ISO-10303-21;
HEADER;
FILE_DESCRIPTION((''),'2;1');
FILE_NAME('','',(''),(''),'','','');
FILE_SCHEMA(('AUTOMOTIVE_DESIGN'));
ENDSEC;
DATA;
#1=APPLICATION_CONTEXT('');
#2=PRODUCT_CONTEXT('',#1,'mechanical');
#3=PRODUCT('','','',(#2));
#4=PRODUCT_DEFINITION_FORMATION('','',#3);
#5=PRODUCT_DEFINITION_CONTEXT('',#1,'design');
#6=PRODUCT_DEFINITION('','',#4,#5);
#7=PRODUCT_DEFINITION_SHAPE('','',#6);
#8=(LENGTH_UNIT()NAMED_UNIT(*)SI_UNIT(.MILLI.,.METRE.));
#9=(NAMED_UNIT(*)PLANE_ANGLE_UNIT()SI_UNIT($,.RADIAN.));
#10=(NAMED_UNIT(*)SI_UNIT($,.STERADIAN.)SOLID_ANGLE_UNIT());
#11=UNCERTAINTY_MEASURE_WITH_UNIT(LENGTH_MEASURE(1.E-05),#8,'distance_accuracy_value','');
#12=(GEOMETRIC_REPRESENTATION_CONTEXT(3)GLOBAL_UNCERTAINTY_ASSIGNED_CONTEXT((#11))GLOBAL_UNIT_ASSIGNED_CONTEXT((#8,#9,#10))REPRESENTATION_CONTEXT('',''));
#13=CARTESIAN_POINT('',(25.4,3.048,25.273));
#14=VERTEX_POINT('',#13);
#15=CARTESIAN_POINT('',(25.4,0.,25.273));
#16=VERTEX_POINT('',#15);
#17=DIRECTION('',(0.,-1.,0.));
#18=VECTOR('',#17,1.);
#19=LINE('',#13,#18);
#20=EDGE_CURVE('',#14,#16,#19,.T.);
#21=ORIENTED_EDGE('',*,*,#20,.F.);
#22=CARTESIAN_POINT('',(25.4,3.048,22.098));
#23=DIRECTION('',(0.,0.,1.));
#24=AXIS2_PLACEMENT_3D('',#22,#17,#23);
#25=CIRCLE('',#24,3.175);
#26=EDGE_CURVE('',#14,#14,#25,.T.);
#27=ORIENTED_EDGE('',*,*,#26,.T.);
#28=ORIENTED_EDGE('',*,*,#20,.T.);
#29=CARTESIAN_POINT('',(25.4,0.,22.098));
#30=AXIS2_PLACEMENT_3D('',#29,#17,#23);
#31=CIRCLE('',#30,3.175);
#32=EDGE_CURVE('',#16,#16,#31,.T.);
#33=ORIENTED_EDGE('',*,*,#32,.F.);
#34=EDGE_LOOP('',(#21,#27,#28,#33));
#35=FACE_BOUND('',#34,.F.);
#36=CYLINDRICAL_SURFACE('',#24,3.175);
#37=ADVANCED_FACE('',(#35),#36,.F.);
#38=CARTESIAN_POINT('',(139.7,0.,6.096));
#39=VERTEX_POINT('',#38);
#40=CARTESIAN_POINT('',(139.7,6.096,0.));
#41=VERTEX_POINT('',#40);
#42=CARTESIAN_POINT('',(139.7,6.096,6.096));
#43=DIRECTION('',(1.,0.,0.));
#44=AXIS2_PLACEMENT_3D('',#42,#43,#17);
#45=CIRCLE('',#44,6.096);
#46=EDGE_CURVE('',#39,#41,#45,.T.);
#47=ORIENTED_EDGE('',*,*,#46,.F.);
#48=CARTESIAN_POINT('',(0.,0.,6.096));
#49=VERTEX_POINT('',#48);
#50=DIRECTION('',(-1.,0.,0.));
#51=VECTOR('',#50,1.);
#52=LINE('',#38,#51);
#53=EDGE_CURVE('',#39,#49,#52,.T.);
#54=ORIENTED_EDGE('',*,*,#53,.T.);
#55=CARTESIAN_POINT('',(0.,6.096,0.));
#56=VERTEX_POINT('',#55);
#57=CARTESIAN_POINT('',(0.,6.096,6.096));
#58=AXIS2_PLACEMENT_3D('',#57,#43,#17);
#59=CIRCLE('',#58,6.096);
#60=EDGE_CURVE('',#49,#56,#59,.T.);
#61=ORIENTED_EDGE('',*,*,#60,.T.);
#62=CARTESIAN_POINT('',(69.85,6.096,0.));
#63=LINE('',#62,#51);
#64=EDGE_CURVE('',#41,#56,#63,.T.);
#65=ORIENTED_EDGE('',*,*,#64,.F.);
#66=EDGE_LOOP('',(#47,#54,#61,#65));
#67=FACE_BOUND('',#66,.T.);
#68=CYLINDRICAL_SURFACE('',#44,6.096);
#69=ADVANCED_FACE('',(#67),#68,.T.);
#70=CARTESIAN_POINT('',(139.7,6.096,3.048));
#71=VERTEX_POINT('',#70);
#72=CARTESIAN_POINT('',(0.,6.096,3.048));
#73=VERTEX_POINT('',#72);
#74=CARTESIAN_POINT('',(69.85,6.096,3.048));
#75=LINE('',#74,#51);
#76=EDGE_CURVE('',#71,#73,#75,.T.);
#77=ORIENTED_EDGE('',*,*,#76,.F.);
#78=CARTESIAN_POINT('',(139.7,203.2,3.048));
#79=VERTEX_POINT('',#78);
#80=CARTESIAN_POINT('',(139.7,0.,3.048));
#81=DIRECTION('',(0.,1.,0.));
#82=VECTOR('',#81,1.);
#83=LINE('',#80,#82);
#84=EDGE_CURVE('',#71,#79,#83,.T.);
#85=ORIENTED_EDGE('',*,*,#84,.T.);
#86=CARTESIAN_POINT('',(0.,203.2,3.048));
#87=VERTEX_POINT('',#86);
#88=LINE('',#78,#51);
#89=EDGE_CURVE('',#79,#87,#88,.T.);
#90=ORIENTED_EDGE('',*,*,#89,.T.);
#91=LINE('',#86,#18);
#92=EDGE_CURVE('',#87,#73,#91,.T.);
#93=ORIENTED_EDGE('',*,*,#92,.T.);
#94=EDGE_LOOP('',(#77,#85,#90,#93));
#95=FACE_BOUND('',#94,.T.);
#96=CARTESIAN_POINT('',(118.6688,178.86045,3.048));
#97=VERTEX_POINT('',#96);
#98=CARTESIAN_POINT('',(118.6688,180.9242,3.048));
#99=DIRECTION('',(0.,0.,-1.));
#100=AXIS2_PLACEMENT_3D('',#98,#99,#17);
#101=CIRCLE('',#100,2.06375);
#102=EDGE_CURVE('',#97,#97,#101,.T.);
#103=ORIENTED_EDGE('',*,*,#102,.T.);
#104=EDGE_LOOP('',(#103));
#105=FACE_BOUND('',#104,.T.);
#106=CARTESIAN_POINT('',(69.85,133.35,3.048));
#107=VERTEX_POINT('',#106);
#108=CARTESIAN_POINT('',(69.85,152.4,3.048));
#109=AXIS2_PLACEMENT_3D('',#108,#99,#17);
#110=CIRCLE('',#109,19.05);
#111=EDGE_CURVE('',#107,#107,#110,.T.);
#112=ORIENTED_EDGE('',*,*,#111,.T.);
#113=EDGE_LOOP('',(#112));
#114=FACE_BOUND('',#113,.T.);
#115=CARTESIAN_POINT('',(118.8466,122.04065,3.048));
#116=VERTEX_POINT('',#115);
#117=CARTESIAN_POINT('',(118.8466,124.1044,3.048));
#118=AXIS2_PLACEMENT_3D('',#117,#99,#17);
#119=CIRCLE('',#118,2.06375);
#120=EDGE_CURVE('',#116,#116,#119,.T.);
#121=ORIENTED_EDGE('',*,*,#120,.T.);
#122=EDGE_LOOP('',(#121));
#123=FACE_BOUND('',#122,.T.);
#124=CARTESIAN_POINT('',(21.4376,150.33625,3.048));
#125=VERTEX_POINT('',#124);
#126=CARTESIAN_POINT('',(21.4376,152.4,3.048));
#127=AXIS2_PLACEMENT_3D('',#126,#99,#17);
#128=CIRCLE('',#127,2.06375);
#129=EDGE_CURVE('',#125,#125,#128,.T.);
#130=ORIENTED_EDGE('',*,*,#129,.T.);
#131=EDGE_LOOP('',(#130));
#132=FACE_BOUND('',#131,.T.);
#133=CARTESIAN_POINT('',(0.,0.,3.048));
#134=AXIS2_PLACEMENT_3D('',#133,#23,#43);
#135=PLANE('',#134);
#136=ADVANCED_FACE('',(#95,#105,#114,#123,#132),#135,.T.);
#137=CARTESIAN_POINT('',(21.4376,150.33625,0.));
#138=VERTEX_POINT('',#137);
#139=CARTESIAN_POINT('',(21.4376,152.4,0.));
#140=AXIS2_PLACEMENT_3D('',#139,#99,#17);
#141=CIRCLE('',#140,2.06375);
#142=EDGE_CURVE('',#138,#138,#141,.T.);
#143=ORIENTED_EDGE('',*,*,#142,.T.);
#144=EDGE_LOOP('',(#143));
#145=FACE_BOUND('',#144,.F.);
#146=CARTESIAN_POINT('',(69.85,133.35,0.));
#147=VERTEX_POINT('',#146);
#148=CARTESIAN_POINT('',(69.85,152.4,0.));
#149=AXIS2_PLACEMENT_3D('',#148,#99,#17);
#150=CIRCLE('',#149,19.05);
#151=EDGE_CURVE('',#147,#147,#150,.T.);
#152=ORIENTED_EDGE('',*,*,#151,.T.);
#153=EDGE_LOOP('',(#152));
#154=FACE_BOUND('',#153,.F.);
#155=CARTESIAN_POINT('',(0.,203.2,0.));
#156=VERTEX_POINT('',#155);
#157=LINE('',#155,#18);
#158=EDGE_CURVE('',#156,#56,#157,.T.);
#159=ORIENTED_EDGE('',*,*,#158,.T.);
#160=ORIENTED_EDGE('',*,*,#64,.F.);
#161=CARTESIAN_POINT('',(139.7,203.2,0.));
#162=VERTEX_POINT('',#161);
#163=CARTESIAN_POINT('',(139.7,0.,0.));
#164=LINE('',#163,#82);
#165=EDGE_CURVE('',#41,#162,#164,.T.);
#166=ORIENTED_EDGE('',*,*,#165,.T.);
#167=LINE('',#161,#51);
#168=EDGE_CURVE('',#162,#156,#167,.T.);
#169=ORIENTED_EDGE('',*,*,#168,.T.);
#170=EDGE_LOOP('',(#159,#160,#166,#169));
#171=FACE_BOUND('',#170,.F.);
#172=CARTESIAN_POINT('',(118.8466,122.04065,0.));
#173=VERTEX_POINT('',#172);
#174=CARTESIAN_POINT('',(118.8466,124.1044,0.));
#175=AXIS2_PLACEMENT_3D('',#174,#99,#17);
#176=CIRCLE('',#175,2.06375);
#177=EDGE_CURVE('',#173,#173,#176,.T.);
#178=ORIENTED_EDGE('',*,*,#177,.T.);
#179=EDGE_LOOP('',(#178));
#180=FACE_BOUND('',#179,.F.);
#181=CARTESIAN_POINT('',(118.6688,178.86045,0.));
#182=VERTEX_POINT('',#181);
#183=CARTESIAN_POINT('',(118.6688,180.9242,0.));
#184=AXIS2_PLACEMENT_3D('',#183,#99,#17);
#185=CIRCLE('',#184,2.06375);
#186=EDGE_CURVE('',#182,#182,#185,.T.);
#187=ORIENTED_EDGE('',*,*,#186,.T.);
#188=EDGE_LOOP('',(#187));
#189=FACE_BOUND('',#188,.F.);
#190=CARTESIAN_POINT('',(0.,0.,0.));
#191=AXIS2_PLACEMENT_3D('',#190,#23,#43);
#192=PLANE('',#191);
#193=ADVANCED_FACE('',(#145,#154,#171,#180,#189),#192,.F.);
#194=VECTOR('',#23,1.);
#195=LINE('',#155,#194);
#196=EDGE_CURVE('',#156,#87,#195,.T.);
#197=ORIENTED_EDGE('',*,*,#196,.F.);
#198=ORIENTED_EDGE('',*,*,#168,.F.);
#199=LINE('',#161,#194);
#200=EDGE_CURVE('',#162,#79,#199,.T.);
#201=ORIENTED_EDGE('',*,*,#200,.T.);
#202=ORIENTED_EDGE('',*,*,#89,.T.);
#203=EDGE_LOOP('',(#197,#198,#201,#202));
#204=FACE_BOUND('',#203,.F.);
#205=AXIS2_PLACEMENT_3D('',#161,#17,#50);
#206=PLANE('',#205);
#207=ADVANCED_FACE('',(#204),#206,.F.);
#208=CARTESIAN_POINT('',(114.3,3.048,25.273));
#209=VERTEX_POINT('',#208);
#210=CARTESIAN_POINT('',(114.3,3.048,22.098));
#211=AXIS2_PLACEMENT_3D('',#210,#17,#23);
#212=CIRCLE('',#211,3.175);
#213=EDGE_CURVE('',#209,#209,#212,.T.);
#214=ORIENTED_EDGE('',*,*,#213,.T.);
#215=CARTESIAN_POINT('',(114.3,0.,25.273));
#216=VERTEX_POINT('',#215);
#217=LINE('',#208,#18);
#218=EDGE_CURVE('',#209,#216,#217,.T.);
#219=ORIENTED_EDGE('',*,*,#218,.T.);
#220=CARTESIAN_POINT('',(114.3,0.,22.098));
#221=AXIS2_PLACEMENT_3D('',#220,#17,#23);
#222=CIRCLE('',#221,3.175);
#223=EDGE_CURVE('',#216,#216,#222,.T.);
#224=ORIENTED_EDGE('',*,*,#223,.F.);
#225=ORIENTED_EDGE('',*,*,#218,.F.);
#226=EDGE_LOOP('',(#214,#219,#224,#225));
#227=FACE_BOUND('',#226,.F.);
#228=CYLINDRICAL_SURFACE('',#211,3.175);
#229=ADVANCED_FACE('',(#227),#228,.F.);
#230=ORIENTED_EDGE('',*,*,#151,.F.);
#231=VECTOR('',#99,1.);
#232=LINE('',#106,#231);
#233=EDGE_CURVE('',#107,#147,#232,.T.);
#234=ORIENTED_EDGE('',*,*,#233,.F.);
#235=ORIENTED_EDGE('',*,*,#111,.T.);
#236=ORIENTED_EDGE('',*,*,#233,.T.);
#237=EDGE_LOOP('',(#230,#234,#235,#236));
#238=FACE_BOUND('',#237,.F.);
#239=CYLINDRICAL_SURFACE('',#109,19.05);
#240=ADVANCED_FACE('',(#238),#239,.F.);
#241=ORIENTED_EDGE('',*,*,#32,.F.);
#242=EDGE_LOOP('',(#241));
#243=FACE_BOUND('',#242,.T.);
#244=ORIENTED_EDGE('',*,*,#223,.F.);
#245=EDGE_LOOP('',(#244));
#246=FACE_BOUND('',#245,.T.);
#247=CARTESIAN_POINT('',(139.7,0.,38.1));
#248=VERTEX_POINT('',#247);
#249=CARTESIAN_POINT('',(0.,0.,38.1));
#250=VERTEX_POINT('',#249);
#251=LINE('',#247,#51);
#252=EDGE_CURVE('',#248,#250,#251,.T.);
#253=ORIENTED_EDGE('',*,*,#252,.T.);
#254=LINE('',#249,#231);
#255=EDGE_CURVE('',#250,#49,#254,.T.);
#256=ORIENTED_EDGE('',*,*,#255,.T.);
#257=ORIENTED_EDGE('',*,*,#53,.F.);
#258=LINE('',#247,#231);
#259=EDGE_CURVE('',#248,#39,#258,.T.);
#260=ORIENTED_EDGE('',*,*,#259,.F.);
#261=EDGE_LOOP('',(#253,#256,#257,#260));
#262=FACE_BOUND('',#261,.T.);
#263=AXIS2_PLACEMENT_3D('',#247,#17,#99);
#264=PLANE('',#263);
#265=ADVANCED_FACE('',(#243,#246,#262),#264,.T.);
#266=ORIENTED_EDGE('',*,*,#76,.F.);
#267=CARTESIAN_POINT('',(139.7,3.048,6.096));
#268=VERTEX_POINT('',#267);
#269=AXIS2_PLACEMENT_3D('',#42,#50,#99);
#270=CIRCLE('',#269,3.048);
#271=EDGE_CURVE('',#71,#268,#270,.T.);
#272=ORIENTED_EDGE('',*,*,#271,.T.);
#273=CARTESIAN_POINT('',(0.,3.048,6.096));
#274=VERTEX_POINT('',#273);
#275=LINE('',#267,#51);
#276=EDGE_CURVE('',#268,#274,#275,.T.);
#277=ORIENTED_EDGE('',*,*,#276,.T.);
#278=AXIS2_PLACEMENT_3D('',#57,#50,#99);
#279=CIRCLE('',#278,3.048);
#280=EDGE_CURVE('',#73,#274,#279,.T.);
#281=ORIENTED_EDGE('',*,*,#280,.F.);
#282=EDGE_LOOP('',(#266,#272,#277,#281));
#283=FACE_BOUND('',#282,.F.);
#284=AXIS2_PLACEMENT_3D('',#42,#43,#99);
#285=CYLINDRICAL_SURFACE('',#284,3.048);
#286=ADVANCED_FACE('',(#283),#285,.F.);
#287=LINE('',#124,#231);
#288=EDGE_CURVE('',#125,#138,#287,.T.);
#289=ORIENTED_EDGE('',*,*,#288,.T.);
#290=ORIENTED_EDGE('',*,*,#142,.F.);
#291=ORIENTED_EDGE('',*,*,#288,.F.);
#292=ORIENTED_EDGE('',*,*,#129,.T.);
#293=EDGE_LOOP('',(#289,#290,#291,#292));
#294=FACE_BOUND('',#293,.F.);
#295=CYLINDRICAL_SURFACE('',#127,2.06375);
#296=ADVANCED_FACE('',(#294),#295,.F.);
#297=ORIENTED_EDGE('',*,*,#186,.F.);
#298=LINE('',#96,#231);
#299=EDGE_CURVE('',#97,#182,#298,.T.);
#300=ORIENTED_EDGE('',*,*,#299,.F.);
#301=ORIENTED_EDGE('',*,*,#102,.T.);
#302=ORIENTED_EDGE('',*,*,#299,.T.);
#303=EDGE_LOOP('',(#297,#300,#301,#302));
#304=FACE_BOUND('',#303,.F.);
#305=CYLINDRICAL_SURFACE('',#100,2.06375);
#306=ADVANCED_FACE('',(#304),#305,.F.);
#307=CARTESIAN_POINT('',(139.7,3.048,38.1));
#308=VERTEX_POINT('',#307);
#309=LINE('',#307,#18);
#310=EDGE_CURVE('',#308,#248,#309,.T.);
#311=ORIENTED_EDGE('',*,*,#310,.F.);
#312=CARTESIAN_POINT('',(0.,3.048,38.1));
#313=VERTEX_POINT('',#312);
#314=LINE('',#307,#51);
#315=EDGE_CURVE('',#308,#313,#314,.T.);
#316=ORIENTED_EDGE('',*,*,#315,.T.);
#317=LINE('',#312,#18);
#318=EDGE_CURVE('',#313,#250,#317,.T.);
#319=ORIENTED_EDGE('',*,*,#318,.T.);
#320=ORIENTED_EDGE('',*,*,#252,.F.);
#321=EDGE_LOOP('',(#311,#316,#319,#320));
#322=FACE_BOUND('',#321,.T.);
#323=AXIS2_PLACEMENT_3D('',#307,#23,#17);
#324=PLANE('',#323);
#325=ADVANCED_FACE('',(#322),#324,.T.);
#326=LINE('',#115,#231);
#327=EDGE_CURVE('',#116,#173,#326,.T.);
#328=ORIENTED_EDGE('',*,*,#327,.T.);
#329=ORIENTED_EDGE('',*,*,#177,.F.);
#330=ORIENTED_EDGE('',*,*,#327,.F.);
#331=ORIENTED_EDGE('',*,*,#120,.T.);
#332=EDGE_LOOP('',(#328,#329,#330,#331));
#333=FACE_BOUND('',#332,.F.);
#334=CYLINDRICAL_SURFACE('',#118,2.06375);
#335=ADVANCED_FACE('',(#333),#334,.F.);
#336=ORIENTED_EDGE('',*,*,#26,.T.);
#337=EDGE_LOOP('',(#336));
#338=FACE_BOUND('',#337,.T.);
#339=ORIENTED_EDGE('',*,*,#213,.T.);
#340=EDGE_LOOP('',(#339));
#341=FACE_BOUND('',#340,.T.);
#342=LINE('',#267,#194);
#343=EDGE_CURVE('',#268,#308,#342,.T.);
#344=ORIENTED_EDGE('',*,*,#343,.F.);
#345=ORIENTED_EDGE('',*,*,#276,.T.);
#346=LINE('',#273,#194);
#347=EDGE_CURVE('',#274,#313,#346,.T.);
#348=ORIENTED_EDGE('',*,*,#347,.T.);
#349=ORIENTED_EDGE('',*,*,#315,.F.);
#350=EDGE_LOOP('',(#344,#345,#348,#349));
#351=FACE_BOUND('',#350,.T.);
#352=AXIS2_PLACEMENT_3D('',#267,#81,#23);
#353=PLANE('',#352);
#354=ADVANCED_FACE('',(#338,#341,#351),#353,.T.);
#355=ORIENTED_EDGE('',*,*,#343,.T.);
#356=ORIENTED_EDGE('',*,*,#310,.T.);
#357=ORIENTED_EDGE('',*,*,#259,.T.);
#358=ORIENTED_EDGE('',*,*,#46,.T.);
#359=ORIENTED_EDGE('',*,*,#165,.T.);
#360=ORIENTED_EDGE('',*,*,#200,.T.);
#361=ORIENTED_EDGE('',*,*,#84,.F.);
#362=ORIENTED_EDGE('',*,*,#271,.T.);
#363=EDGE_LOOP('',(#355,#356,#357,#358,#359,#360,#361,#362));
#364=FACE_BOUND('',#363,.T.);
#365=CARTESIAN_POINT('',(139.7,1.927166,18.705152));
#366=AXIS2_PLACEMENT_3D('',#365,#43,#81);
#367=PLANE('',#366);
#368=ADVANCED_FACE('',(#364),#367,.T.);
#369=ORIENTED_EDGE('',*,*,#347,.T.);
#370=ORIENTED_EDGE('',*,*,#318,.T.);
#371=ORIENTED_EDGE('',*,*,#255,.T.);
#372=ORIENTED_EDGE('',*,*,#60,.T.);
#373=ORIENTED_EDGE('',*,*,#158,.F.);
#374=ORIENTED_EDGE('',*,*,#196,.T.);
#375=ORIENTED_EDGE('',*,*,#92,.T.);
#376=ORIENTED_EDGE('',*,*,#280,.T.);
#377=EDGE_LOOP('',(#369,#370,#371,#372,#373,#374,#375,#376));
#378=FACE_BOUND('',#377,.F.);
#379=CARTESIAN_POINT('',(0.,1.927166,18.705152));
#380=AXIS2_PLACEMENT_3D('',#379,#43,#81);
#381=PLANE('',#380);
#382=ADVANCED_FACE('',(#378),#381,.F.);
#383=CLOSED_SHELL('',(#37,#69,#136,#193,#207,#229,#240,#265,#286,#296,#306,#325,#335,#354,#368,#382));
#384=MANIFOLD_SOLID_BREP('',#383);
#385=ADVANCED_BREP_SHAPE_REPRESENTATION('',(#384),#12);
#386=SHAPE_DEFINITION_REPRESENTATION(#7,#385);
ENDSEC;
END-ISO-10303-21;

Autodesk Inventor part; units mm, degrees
ref_plane "YZ Plane" through (0, 0, 0) normal (1, 0, 0) x (0, 1, 0)
ref_plane "XZ Plane" through (0, 0, 0) normal (0, 1, 0) x (-1, 0, 0)
ref_plane "XY Plane" through (0, 0, 0) normal (0, 0, 1) x (1, 0, 0)
sketch "Sketch1" plane through (0, 0, 0) normal (0, 0, 1) x (1, 0, 0)
  line L0 (0, 0) -> (139.7, 0)
  line L1 (139.7, 0) -> (139.7, 203.2)
  line L2 (139.7, 203.2) -> (0, 203.2)
  line L3 (0, 203.2) -> (0, 0)
  dimension "d0" = 139.7
  dimension "d1" = 203.2
extrude "Plate1" add sketch "Sketch1" along normal blind 3.048
sketch "Sketch2" plane through (139.7, 3.048, 0) normal (0, -1, 0) x (1, 0, 0)
  line L0 (-139.7, 0) -> (0, 0)
  line L1 (0, 0) -> (0, 38.1)
  line L2 (0, 38.1) -> (-139.7, 38.1)
  line L3 (-139.7, 38.1) -> (-139.7, 0)
edge flange "Flange1" height 38.1 angle 90 thickness 3.048 bend radius 3.048 thickness toward (0, -1, 0) relief tear relief width 3.048 relief depth 1.524 edges at (69.85, 0, 3.048) wall of the first edge with corners at (0, 3.048, 0) (139.7, 3.048, 0) (139.7, 3.048, 38.1) (0, 3.048, 38.1)
bend "Bend1"
corner "Corner1"
sketch "Sketch3" plane through (0, 0, 3.048) normal (0, 0, 1) x (1, 0, 0)
  line L0 (139.7, 203.2) -> (139.7, 6.096) projected
  line L1 (0, 203.2) -> (139.7, 203.2) projected
  circle A0 centre (21.4376, 152.4) radius 2.0638
  circle A1 centre (118.8466, 124.1044) radius 2.0638
  circle A2 centre (118.6688, 180.9242) radius 2.0637
  point P0 (0, 0)
  dimension "d13" = 20.8534
  dimension "d14" = 79.0956
  dimension "d16" = 21.0312
  dimension "d18" = 50.8
  dimension "d19" = 22.2758
  dimension "d20" = 4.1275
  dimension "d21" = 4.1275
  dimension "d22" = 4.1275
  dimension "d39" = 118.2624
hole "Hole1" at (118.8466, 124.1044, 3.048) at (118.6688, 180.9242, 3.048) at (21.4376, 152.4, 3.048) direction (0, 0, -1) diameter 4.1275 end through all
sketch "Sketch4" plane through (0, 3.048, 38.1) normal (0, 1, 0) x (1, 0, 0)
  line L0 (0, 0) -> (0, 32.004) projected
  line L1 (139.7, 0) -> (139.7, 32.004) projected
  point P0 (0, 38.1)
  point P1 (25.4, 16.002)
  point P2 (114.3, 16.002)
  dimension "d30" = 25.4
  dimension "d31" = 25.4
hole "Hole2" at (25.4, 3.048, 22.098) at (114.3, 3.048, 22.098) direction (0, -1, 0) diameter 6.35 end through all
sketch "Sketch5" plane through (0, 0, 3.048) normal (0, 0, 1) x (1, 0, 0)
  line L0 (139.7, 203.2) -> (139.7, 6.096) projected
  line L1 (0, 203.2) -> (139.7, 203.2) projected
  point P0 (0, 0)
  point P1 (69.85, 152.4)
  dimension "d40" = 50.8
  dimension "d41" = 69.85
hole "Hole3" at (69.85, 152.4, 3.048) direction (0, 0, -1) diameter 38.1 end through all
equation "\"d28\" = Thickness"
equation "\"d37\" = Thickness"
equation "\"d47\" = Thickness"
equation "\"d3\" = BendReliefWidth"
equation "\"d4\" = BendReliefDepth"
equation "\"d5\" = MinimumRemnant"
equation "\"d6\" = BendRadius"
equation "\"d9\" = BendRadius"
equation "\"d10\" = CornerReliefSize"
equation "\"d11\" = GapSize"
equation "\"d12\" = JacobiRadiusSize"
equation "\"BendRadius\" = Thickness"
equation "\"BendReliefWidth\" = Thickness"
equation "\"BendReliefDepth\" = 0.5 * Thickness"
equation "\"CornerReliefSize\" = 4 * Thickness"
equation "\"MinimumRemnant\" = 2 * Thickness"
equation "\"TransitionRadius\" = BendRadius"
equation "\"JacobiRadiusSize\" = BendRadius"
equation "\"GapSize\" = Thickness"
equation "\"d2\" = BendRadius"
equation "\"Thickness\" = 3.048"
properties material "Aluminum 6061"
